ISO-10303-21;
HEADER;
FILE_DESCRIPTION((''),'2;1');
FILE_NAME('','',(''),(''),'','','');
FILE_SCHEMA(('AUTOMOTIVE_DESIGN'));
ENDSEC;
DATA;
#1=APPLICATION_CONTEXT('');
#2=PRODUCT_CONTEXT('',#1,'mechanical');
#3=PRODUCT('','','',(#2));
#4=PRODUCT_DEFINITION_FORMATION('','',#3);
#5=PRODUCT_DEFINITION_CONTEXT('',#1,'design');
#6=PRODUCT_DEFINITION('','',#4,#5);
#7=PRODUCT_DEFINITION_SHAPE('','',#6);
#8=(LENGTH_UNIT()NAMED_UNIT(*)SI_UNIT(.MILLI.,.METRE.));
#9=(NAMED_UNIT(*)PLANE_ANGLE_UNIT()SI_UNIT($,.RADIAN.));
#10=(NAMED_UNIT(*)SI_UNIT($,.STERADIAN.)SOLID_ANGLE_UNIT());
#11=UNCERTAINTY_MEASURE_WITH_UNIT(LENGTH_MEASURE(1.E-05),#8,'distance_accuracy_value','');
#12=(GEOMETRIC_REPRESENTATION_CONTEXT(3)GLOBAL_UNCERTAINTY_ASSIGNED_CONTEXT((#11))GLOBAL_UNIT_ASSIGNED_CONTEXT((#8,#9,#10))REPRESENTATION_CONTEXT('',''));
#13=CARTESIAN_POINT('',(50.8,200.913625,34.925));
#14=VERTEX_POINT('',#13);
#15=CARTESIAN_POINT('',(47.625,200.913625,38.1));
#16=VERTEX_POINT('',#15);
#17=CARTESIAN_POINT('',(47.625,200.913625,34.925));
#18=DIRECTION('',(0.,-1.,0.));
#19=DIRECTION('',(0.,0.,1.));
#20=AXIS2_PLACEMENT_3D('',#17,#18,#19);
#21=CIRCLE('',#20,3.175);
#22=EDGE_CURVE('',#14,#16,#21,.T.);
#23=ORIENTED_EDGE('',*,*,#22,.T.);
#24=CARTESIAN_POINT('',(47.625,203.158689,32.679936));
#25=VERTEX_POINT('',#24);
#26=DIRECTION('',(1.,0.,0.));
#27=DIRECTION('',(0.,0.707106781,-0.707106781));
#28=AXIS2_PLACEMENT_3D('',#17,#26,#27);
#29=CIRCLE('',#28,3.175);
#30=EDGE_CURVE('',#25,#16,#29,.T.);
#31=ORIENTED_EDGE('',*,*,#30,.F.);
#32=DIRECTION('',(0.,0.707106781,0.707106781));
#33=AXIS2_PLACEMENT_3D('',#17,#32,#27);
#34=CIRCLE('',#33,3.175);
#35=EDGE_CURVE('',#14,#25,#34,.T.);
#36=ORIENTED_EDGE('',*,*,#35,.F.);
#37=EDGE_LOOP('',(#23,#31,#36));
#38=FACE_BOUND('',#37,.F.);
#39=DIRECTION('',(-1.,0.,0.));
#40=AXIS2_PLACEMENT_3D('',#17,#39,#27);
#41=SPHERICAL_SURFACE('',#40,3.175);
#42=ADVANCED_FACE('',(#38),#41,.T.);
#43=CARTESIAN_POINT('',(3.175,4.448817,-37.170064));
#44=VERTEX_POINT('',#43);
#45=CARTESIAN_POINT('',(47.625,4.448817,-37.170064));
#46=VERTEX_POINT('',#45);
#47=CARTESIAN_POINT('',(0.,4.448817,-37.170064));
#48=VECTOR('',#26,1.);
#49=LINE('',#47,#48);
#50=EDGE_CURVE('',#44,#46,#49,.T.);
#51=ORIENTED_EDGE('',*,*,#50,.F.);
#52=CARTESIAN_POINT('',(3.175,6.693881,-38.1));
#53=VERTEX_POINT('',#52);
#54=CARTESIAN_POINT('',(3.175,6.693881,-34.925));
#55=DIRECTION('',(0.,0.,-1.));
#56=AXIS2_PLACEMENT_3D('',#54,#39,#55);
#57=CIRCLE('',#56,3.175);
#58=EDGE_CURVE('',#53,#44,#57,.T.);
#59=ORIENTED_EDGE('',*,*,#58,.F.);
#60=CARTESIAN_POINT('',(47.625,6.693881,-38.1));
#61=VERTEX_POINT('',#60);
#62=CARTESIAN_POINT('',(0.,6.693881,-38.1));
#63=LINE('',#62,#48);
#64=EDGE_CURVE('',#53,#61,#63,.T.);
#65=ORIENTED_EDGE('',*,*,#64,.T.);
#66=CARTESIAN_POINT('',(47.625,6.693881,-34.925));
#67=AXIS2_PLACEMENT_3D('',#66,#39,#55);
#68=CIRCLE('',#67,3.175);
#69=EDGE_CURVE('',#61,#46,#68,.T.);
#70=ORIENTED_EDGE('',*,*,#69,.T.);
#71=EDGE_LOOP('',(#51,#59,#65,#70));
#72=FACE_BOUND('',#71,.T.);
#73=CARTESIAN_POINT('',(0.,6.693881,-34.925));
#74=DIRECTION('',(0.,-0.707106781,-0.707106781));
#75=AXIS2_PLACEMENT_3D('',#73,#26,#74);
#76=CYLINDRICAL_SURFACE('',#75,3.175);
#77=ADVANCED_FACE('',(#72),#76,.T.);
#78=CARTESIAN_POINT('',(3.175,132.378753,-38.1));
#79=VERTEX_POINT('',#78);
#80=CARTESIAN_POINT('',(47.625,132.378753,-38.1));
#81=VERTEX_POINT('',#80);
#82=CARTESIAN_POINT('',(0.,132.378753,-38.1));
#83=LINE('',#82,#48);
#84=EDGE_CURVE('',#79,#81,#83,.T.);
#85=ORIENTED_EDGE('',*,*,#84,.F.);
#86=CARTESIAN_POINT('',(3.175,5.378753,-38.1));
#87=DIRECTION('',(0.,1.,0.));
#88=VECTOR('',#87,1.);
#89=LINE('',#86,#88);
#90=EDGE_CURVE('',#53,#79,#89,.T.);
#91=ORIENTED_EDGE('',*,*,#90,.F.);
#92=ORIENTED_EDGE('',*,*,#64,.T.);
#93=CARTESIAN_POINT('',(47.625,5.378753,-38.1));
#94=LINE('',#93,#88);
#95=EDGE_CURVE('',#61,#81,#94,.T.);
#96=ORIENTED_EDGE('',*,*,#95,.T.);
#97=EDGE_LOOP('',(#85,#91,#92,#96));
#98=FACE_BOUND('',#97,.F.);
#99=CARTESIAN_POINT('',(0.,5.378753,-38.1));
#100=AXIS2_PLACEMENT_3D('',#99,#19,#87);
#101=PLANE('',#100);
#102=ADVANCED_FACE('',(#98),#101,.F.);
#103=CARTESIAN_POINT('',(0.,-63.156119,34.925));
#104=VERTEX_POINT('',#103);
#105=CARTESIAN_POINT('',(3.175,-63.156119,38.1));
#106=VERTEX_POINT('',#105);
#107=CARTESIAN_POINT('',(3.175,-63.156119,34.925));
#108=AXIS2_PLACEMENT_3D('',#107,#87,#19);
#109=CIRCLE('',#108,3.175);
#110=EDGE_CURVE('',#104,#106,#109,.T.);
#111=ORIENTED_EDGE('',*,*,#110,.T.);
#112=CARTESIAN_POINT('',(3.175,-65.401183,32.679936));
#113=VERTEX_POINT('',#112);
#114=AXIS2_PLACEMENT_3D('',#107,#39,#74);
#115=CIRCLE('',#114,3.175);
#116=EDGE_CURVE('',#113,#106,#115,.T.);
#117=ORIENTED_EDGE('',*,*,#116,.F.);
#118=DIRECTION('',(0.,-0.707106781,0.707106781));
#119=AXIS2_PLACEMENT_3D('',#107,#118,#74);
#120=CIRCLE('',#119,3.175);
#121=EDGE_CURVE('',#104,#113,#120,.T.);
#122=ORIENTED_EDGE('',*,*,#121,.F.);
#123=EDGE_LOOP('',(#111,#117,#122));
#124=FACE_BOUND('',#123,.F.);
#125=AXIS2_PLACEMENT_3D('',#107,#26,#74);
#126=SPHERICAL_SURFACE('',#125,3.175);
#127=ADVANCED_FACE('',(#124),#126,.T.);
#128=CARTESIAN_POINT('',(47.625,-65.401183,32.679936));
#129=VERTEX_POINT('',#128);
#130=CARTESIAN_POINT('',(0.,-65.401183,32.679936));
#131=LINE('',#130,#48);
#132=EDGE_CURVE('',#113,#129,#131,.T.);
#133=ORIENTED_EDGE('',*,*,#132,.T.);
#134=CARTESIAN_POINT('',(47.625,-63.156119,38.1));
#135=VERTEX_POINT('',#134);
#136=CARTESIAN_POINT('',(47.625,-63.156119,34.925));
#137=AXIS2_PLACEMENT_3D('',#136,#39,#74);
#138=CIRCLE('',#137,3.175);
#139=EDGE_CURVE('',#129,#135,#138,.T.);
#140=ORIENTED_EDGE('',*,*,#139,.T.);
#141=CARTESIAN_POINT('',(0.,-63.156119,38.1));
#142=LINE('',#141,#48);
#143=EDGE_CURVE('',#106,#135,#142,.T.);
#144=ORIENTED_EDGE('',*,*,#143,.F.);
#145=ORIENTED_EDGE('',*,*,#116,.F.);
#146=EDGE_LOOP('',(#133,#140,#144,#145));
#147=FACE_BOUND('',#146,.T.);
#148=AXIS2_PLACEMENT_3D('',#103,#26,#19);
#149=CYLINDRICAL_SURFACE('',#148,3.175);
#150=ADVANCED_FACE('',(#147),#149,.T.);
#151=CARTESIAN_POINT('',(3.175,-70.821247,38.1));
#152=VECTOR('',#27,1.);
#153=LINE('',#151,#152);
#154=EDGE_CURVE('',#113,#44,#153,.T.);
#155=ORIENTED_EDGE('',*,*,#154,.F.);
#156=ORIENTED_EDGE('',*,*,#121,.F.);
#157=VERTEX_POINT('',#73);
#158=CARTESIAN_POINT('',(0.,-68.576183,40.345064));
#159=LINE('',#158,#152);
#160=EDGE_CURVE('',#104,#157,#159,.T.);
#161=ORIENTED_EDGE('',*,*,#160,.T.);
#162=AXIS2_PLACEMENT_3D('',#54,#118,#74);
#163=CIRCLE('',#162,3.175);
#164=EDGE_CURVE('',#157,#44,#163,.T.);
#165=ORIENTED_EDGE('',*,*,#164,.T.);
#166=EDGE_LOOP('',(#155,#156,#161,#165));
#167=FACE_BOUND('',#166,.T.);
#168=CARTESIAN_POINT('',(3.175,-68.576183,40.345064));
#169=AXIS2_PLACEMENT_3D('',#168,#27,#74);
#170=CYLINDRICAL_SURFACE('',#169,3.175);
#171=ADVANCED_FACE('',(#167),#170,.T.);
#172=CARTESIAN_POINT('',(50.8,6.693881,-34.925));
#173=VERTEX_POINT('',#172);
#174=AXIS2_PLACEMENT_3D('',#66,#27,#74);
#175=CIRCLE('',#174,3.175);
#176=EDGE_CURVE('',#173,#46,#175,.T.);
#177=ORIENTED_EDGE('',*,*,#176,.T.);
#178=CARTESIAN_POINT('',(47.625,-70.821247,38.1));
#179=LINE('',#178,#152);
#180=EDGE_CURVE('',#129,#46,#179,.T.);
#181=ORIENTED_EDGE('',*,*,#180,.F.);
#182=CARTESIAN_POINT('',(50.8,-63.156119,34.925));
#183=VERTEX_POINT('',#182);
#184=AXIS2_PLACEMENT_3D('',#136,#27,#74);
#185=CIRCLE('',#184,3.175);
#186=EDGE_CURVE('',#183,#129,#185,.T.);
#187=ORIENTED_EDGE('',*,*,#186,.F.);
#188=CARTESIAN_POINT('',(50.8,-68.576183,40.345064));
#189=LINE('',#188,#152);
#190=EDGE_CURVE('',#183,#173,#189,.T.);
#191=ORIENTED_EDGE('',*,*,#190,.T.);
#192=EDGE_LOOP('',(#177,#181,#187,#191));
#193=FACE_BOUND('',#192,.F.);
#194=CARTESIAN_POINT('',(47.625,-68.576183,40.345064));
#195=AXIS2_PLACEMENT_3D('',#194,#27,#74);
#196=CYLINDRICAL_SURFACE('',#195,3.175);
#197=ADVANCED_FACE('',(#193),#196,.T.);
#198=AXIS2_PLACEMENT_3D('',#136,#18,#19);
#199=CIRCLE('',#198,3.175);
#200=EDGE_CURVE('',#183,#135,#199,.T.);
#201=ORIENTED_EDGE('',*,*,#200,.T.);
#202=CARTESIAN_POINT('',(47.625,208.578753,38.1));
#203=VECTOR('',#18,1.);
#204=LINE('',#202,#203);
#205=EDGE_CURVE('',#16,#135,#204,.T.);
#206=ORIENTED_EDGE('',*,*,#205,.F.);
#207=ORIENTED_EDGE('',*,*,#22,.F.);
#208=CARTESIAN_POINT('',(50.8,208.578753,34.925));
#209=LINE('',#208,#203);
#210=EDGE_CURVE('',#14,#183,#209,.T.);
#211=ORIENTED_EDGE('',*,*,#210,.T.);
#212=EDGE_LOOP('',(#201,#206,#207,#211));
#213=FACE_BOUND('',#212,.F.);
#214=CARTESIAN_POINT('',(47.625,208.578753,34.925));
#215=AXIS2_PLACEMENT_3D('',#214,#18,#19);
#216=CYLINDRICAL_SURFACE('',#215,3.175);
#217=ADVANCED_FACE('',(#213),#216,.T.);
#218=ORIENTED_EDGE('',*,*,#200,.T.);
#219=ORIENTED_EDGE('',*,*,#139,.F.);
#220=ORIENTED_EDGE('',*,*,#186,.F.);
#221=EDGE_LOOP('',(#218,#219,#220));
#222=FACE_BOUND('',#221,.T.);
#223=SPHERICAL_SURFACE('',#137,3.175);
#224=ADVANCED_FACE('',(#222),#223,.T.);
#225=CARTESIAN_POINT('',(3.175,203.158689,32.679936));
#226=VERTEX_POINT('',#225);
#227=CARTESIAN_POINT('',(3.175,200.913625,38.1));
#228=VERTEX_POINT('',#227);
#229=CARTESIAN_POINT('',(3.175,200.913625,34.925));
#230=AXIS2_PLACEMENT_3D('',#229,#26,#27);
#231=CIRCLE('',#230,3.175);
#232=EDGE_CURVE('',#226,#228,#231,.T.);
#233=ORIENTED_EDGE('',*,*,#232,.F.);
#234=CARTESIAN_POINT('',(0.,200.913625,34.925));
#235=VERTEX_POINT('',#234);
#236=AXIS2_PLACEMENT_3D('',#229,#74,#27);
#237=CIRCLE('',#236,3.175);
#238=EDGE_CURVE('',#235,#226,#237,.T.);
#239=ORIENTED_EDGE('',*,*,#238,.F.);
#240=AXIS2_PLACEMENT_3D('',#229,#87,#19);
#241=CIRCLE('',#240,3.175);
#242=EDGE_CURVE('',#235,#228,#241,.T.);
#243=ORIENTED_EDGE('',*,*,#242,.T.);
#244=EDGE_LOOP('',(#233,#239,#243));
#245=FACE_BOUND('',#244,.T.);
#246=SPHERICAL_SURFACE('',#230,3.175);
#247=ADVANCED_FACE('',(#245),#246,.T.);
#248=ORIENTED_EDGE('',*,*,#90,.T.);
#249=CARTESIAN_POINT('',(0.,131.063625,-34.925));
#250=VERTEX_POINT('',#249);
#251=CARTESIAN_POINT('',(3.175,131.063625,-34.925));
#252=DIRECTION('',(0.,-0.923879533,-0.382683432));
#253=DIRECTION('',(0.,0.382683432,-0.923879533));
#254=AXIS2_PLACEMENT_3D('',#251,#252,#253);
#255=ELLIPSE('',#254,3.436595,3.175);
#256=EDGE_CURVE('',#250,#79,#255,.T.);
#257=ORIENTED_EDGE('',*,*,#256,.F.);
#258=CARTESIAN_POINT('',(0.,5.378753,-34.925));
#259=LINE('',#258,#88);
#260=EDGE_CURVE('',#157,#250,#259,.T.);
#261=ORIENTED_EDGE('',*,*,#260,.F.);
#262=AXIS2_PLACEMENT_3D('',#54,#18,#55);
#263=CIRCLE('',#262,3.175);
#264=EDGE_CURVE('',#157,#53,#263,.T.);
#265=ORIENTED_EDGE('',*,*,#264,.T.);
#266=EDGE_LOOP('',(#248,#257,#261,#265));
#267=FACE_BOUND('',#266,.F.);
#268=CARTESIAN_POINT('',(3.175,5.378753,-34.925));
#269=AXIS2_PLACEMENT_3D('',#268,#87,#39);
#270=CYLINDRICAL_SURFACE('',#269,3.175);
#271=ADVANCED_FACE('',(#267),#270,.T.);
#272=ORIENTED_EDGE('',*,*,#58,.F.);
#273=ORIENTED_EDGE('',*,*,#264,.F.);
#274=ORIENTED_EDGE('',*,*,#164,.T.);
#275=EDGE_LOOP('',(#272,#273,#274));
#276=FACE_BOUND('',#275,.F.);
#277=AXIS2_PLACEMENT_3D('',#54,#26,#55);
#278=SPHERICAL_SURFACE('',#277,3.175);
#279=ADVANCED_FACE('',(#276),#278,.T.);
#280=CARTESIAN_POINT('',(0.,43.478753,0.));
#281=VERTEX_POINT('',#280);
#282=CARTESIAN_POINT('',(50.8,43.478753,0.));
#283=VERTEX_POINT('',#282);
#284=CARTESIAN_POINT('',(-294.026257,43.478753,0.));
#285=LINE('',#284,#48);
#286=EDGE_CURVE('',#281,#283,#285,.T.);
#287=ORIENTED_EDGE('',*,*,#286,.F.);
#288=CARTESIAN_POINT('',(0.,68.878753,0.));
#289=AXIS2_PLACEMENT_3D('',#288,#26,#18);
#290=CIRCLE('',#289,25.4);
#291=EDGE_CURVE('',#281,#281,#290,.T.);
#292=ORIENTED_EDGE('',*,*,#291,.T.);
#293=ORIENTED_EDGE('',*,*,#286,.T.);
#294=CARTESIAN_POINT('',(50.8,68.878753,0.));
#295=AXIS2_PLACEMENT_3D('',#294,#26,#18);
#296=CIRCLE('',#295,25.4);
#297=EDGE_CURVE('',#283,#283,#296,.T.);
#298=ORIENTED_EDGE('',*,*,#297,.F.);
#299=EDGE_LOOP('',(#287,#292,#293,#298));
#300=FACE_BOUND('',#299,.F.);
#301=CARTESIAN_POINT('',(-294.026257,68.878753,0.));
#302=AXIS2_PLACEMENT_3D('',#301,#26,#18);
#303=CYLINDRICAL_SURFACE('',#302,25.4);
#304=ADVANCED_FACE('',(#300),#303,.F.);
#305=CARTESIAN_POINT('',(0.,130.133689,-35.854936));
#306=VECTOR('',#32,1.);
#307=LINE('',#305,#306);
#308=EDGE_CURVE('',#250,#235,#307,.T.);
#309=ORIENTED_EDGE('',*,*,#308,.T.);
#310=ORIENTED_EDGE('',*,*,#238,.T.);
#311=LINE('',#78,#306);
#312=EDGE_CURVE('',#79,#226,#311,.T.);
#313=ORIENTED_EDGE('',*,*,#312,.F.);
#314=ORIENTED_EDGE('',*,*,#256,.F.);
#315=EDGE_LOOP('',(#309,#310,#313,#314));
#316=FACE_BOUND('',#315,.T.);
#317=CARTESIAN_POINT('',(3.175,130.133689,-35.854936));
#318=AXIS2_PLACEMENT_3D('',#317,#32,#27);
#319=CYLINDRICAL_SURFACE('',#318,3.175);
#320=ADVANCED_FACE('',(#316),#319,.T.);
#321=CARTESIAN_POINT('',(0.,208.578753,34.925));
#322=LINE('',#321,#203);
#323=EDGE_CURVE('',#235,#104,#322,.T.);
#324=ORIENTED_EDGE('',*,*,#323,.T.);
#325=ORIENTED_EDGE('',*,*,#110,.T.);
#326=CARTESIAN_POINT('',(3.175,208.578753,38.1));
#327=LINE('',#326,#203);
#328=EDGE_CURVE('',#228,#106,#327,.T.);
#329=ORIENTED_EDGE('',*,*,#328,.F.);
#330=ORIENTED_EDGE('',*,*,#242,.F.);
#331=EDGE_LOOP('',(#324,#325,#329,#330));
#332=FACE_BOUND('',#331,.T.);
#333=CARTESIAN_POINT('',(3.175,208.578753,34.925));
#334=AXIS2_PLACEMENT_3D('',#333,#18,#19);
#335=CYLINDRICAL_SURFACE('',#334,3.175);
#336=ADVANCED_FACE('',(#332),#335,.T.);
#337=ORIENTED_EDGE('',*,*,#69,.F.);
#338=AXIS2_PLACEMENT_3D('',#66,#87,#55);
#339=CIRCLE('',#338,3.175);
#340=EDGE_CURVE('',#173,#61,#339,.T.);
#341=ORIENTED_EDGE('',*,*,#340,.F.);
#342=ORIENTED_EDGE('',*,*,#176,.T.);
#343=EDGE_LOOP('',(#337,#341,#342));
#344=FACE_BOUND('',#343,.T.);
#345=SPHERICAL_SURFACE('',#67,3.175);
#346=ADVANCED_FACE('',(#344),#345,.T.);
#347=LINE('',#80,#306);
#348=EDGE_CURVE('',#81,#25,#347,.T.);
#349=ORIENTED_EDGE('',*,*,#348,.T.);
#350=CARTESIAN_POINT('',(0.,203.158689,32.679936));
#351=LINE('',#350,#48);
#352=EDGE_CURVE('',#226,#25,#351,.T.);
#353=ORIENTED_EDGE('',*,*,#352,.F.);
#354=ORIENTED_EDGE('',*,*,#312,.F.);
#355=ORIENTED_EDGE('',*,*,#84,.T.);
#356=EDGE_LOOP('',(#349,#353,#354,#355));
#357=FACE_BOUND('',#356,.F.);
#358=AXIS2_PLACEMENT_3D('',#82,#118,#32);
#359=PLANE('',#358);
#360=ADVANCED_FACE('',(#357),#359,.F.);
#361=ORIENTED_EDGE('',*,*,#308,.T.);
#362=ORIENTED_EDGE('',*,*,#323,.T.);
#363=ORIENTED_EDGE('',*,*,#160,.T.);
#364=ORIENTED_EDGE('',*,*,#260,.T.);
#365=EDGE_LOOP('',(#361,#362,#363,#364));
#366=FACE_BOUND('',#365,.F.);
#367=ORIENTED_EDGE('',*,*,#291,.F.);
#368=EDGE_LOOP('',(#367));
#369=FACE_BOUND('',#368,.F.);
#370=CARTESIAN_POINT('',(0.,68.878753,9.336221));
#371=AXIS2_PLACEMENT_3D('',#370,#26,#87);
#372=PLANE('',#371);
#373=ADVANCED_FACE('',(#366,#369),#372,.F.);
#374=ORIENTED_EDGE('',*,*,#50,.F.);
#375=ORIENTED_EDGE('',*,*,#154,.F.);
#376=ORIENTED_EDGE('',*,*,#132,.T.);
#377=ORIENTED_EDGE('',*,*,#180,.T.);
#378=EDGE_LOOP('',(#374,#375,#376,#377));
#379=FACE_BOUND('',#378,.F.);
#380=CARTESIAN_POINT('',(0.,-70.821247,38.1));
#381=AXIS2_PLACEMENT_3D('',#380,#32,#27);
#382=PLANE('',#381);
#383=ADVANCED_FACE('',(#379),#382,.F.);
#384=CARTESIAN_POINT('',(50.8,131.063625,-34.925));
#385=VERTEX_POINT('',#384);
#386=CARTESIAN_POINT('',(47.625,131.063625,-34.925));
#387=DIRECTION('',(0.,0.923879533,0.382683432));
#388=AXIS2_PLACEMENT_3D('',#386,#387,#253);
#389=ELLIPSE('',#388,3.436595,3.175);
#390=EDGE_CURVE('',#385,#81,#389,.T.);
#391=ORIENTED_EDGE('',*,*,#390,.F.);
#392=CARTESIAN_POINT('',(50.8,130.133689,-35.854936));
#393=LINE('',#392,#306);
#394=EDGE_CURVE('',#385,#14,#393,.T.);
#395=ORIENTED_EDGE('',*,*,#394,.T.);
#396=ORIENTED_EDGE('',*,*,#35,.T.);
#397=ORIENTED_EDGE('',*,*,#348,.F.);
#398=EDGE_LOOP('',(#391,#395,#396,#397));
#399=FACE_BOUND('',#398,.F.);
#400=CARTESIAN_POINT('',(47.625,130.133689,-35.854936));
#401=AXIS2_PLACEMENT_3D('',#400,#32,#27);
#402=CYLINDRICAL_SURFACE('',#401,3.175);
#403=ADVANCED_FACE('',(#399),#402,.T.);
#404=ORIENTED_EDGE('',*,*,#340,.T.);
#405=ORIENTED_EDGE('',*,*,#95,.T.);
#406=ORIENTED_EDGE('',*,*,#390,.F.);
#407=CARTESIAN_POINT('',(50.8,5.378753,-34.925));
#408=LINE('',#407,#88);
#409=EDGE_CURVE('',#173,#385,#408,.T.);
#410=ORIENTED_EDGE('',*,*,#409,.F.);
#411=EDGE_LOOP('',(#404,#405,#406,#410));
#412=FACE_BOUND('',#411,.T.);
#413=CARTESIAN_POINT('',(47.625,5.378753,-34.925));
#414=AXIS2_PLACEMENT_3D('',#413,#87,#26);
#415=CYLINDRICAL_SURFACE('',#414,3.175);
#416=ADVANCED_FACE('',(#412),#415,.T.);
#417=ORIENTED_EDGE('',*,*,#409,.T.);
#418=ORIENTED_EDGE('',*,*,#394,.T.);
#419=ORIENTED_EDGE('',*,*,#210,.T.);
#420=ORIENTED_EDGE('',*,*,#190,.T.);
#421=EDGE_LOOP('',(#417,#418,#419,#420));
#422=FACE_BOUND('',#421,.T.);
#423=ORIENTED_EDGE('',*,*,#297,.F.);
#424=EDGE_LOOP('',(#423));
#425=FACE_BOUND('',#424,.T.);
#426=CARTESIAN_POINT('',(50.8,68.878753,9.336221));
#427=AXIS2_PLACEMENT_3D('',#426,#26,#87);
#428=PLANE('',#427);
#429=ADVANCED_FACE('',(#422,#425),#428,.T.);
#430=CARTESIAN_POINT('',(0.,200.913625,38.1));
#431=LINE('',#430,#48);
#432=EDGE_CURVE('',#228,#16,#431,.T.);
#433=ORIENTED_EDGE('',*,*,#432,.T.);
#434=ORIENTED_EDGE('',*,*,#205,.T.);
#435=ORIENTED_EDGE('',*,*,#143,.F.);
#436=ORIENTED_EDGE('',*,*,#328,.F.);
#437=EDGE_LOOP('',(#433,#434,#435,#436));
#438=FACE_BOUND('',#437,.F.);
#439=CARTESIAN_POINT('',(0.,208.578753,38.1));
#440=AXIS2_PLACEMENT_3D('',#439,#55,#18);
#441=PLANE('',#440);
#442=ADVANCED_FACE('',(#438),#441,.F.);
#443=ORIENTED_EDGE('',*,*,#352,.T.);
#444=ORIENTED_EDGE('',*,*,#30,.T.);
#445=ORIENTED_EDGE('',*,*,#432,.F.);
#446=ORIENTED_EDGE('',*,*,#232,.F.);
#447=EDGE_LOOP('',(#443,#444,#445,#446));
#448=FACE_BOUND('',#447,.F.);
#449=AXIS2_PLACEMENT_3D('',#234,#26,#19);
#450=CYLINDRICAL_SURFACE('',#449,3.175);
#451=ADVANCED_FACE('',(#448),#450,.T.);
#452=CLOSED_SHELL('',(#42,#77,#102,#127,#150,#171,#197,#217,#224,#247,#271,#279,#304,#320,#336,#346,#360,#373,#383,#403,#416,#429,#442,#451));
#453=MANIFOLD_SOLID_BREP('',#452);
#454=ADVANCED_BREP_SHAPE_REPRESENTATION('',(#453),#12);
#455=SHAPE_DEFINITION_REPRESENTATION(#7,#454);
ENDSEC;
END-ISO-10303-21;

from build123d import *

# Parameters (mm, degrees)
F1_DEPTH = 50.8
F3_D     = 50.8
F4_R     = 3.175


# Not quite as in the source:
# - a feature of the source that left no trace in its solid (it failed there, or was rolled back) is left out


with BuildPart() as f1:
    # F0 (on Right) → F1 (new body)
    with BuildSketch(Plane.YZ):
        Polygon((208.5787526399, 38.1), (-70.8212473601, 38.1), (5.3787526399, -38.1), (132.3787526399, -38.1), align=None)
    extrude(amount=F1_DEPTH)

    # F3 (through all)
    with Locations(Plane(origin=(0, 0, 0), x_dir=(0, 1, 0), z_dir=(-1, 0, 0))):
        with Locations((68.8787526399, 0)):
            Hole(F3_D / 2)

    # F4
    f4_edges = [f1.edges().sort_by_distance(p)[0] for p in [
        (0, 68.878753, 38.1),
        (25.4, 5.378753, -38.1),
        (0, 68.878753, -38.1),
        (50.8, 68.878753, -38.1),
        (25.4, -70.821247, 38.1),
        (0, -32.721247, 0),
        (50.8, -32.721247, 0),
        (25.4, 208.578753, 38.1),
        (0, 170.478753, 0),
        (50.8, 170.478753, 0),
        (50.8, 68.878753, 38.1),
    ]]
    fillet(f4_edges, radius=F4_R)


solid = f1.part
